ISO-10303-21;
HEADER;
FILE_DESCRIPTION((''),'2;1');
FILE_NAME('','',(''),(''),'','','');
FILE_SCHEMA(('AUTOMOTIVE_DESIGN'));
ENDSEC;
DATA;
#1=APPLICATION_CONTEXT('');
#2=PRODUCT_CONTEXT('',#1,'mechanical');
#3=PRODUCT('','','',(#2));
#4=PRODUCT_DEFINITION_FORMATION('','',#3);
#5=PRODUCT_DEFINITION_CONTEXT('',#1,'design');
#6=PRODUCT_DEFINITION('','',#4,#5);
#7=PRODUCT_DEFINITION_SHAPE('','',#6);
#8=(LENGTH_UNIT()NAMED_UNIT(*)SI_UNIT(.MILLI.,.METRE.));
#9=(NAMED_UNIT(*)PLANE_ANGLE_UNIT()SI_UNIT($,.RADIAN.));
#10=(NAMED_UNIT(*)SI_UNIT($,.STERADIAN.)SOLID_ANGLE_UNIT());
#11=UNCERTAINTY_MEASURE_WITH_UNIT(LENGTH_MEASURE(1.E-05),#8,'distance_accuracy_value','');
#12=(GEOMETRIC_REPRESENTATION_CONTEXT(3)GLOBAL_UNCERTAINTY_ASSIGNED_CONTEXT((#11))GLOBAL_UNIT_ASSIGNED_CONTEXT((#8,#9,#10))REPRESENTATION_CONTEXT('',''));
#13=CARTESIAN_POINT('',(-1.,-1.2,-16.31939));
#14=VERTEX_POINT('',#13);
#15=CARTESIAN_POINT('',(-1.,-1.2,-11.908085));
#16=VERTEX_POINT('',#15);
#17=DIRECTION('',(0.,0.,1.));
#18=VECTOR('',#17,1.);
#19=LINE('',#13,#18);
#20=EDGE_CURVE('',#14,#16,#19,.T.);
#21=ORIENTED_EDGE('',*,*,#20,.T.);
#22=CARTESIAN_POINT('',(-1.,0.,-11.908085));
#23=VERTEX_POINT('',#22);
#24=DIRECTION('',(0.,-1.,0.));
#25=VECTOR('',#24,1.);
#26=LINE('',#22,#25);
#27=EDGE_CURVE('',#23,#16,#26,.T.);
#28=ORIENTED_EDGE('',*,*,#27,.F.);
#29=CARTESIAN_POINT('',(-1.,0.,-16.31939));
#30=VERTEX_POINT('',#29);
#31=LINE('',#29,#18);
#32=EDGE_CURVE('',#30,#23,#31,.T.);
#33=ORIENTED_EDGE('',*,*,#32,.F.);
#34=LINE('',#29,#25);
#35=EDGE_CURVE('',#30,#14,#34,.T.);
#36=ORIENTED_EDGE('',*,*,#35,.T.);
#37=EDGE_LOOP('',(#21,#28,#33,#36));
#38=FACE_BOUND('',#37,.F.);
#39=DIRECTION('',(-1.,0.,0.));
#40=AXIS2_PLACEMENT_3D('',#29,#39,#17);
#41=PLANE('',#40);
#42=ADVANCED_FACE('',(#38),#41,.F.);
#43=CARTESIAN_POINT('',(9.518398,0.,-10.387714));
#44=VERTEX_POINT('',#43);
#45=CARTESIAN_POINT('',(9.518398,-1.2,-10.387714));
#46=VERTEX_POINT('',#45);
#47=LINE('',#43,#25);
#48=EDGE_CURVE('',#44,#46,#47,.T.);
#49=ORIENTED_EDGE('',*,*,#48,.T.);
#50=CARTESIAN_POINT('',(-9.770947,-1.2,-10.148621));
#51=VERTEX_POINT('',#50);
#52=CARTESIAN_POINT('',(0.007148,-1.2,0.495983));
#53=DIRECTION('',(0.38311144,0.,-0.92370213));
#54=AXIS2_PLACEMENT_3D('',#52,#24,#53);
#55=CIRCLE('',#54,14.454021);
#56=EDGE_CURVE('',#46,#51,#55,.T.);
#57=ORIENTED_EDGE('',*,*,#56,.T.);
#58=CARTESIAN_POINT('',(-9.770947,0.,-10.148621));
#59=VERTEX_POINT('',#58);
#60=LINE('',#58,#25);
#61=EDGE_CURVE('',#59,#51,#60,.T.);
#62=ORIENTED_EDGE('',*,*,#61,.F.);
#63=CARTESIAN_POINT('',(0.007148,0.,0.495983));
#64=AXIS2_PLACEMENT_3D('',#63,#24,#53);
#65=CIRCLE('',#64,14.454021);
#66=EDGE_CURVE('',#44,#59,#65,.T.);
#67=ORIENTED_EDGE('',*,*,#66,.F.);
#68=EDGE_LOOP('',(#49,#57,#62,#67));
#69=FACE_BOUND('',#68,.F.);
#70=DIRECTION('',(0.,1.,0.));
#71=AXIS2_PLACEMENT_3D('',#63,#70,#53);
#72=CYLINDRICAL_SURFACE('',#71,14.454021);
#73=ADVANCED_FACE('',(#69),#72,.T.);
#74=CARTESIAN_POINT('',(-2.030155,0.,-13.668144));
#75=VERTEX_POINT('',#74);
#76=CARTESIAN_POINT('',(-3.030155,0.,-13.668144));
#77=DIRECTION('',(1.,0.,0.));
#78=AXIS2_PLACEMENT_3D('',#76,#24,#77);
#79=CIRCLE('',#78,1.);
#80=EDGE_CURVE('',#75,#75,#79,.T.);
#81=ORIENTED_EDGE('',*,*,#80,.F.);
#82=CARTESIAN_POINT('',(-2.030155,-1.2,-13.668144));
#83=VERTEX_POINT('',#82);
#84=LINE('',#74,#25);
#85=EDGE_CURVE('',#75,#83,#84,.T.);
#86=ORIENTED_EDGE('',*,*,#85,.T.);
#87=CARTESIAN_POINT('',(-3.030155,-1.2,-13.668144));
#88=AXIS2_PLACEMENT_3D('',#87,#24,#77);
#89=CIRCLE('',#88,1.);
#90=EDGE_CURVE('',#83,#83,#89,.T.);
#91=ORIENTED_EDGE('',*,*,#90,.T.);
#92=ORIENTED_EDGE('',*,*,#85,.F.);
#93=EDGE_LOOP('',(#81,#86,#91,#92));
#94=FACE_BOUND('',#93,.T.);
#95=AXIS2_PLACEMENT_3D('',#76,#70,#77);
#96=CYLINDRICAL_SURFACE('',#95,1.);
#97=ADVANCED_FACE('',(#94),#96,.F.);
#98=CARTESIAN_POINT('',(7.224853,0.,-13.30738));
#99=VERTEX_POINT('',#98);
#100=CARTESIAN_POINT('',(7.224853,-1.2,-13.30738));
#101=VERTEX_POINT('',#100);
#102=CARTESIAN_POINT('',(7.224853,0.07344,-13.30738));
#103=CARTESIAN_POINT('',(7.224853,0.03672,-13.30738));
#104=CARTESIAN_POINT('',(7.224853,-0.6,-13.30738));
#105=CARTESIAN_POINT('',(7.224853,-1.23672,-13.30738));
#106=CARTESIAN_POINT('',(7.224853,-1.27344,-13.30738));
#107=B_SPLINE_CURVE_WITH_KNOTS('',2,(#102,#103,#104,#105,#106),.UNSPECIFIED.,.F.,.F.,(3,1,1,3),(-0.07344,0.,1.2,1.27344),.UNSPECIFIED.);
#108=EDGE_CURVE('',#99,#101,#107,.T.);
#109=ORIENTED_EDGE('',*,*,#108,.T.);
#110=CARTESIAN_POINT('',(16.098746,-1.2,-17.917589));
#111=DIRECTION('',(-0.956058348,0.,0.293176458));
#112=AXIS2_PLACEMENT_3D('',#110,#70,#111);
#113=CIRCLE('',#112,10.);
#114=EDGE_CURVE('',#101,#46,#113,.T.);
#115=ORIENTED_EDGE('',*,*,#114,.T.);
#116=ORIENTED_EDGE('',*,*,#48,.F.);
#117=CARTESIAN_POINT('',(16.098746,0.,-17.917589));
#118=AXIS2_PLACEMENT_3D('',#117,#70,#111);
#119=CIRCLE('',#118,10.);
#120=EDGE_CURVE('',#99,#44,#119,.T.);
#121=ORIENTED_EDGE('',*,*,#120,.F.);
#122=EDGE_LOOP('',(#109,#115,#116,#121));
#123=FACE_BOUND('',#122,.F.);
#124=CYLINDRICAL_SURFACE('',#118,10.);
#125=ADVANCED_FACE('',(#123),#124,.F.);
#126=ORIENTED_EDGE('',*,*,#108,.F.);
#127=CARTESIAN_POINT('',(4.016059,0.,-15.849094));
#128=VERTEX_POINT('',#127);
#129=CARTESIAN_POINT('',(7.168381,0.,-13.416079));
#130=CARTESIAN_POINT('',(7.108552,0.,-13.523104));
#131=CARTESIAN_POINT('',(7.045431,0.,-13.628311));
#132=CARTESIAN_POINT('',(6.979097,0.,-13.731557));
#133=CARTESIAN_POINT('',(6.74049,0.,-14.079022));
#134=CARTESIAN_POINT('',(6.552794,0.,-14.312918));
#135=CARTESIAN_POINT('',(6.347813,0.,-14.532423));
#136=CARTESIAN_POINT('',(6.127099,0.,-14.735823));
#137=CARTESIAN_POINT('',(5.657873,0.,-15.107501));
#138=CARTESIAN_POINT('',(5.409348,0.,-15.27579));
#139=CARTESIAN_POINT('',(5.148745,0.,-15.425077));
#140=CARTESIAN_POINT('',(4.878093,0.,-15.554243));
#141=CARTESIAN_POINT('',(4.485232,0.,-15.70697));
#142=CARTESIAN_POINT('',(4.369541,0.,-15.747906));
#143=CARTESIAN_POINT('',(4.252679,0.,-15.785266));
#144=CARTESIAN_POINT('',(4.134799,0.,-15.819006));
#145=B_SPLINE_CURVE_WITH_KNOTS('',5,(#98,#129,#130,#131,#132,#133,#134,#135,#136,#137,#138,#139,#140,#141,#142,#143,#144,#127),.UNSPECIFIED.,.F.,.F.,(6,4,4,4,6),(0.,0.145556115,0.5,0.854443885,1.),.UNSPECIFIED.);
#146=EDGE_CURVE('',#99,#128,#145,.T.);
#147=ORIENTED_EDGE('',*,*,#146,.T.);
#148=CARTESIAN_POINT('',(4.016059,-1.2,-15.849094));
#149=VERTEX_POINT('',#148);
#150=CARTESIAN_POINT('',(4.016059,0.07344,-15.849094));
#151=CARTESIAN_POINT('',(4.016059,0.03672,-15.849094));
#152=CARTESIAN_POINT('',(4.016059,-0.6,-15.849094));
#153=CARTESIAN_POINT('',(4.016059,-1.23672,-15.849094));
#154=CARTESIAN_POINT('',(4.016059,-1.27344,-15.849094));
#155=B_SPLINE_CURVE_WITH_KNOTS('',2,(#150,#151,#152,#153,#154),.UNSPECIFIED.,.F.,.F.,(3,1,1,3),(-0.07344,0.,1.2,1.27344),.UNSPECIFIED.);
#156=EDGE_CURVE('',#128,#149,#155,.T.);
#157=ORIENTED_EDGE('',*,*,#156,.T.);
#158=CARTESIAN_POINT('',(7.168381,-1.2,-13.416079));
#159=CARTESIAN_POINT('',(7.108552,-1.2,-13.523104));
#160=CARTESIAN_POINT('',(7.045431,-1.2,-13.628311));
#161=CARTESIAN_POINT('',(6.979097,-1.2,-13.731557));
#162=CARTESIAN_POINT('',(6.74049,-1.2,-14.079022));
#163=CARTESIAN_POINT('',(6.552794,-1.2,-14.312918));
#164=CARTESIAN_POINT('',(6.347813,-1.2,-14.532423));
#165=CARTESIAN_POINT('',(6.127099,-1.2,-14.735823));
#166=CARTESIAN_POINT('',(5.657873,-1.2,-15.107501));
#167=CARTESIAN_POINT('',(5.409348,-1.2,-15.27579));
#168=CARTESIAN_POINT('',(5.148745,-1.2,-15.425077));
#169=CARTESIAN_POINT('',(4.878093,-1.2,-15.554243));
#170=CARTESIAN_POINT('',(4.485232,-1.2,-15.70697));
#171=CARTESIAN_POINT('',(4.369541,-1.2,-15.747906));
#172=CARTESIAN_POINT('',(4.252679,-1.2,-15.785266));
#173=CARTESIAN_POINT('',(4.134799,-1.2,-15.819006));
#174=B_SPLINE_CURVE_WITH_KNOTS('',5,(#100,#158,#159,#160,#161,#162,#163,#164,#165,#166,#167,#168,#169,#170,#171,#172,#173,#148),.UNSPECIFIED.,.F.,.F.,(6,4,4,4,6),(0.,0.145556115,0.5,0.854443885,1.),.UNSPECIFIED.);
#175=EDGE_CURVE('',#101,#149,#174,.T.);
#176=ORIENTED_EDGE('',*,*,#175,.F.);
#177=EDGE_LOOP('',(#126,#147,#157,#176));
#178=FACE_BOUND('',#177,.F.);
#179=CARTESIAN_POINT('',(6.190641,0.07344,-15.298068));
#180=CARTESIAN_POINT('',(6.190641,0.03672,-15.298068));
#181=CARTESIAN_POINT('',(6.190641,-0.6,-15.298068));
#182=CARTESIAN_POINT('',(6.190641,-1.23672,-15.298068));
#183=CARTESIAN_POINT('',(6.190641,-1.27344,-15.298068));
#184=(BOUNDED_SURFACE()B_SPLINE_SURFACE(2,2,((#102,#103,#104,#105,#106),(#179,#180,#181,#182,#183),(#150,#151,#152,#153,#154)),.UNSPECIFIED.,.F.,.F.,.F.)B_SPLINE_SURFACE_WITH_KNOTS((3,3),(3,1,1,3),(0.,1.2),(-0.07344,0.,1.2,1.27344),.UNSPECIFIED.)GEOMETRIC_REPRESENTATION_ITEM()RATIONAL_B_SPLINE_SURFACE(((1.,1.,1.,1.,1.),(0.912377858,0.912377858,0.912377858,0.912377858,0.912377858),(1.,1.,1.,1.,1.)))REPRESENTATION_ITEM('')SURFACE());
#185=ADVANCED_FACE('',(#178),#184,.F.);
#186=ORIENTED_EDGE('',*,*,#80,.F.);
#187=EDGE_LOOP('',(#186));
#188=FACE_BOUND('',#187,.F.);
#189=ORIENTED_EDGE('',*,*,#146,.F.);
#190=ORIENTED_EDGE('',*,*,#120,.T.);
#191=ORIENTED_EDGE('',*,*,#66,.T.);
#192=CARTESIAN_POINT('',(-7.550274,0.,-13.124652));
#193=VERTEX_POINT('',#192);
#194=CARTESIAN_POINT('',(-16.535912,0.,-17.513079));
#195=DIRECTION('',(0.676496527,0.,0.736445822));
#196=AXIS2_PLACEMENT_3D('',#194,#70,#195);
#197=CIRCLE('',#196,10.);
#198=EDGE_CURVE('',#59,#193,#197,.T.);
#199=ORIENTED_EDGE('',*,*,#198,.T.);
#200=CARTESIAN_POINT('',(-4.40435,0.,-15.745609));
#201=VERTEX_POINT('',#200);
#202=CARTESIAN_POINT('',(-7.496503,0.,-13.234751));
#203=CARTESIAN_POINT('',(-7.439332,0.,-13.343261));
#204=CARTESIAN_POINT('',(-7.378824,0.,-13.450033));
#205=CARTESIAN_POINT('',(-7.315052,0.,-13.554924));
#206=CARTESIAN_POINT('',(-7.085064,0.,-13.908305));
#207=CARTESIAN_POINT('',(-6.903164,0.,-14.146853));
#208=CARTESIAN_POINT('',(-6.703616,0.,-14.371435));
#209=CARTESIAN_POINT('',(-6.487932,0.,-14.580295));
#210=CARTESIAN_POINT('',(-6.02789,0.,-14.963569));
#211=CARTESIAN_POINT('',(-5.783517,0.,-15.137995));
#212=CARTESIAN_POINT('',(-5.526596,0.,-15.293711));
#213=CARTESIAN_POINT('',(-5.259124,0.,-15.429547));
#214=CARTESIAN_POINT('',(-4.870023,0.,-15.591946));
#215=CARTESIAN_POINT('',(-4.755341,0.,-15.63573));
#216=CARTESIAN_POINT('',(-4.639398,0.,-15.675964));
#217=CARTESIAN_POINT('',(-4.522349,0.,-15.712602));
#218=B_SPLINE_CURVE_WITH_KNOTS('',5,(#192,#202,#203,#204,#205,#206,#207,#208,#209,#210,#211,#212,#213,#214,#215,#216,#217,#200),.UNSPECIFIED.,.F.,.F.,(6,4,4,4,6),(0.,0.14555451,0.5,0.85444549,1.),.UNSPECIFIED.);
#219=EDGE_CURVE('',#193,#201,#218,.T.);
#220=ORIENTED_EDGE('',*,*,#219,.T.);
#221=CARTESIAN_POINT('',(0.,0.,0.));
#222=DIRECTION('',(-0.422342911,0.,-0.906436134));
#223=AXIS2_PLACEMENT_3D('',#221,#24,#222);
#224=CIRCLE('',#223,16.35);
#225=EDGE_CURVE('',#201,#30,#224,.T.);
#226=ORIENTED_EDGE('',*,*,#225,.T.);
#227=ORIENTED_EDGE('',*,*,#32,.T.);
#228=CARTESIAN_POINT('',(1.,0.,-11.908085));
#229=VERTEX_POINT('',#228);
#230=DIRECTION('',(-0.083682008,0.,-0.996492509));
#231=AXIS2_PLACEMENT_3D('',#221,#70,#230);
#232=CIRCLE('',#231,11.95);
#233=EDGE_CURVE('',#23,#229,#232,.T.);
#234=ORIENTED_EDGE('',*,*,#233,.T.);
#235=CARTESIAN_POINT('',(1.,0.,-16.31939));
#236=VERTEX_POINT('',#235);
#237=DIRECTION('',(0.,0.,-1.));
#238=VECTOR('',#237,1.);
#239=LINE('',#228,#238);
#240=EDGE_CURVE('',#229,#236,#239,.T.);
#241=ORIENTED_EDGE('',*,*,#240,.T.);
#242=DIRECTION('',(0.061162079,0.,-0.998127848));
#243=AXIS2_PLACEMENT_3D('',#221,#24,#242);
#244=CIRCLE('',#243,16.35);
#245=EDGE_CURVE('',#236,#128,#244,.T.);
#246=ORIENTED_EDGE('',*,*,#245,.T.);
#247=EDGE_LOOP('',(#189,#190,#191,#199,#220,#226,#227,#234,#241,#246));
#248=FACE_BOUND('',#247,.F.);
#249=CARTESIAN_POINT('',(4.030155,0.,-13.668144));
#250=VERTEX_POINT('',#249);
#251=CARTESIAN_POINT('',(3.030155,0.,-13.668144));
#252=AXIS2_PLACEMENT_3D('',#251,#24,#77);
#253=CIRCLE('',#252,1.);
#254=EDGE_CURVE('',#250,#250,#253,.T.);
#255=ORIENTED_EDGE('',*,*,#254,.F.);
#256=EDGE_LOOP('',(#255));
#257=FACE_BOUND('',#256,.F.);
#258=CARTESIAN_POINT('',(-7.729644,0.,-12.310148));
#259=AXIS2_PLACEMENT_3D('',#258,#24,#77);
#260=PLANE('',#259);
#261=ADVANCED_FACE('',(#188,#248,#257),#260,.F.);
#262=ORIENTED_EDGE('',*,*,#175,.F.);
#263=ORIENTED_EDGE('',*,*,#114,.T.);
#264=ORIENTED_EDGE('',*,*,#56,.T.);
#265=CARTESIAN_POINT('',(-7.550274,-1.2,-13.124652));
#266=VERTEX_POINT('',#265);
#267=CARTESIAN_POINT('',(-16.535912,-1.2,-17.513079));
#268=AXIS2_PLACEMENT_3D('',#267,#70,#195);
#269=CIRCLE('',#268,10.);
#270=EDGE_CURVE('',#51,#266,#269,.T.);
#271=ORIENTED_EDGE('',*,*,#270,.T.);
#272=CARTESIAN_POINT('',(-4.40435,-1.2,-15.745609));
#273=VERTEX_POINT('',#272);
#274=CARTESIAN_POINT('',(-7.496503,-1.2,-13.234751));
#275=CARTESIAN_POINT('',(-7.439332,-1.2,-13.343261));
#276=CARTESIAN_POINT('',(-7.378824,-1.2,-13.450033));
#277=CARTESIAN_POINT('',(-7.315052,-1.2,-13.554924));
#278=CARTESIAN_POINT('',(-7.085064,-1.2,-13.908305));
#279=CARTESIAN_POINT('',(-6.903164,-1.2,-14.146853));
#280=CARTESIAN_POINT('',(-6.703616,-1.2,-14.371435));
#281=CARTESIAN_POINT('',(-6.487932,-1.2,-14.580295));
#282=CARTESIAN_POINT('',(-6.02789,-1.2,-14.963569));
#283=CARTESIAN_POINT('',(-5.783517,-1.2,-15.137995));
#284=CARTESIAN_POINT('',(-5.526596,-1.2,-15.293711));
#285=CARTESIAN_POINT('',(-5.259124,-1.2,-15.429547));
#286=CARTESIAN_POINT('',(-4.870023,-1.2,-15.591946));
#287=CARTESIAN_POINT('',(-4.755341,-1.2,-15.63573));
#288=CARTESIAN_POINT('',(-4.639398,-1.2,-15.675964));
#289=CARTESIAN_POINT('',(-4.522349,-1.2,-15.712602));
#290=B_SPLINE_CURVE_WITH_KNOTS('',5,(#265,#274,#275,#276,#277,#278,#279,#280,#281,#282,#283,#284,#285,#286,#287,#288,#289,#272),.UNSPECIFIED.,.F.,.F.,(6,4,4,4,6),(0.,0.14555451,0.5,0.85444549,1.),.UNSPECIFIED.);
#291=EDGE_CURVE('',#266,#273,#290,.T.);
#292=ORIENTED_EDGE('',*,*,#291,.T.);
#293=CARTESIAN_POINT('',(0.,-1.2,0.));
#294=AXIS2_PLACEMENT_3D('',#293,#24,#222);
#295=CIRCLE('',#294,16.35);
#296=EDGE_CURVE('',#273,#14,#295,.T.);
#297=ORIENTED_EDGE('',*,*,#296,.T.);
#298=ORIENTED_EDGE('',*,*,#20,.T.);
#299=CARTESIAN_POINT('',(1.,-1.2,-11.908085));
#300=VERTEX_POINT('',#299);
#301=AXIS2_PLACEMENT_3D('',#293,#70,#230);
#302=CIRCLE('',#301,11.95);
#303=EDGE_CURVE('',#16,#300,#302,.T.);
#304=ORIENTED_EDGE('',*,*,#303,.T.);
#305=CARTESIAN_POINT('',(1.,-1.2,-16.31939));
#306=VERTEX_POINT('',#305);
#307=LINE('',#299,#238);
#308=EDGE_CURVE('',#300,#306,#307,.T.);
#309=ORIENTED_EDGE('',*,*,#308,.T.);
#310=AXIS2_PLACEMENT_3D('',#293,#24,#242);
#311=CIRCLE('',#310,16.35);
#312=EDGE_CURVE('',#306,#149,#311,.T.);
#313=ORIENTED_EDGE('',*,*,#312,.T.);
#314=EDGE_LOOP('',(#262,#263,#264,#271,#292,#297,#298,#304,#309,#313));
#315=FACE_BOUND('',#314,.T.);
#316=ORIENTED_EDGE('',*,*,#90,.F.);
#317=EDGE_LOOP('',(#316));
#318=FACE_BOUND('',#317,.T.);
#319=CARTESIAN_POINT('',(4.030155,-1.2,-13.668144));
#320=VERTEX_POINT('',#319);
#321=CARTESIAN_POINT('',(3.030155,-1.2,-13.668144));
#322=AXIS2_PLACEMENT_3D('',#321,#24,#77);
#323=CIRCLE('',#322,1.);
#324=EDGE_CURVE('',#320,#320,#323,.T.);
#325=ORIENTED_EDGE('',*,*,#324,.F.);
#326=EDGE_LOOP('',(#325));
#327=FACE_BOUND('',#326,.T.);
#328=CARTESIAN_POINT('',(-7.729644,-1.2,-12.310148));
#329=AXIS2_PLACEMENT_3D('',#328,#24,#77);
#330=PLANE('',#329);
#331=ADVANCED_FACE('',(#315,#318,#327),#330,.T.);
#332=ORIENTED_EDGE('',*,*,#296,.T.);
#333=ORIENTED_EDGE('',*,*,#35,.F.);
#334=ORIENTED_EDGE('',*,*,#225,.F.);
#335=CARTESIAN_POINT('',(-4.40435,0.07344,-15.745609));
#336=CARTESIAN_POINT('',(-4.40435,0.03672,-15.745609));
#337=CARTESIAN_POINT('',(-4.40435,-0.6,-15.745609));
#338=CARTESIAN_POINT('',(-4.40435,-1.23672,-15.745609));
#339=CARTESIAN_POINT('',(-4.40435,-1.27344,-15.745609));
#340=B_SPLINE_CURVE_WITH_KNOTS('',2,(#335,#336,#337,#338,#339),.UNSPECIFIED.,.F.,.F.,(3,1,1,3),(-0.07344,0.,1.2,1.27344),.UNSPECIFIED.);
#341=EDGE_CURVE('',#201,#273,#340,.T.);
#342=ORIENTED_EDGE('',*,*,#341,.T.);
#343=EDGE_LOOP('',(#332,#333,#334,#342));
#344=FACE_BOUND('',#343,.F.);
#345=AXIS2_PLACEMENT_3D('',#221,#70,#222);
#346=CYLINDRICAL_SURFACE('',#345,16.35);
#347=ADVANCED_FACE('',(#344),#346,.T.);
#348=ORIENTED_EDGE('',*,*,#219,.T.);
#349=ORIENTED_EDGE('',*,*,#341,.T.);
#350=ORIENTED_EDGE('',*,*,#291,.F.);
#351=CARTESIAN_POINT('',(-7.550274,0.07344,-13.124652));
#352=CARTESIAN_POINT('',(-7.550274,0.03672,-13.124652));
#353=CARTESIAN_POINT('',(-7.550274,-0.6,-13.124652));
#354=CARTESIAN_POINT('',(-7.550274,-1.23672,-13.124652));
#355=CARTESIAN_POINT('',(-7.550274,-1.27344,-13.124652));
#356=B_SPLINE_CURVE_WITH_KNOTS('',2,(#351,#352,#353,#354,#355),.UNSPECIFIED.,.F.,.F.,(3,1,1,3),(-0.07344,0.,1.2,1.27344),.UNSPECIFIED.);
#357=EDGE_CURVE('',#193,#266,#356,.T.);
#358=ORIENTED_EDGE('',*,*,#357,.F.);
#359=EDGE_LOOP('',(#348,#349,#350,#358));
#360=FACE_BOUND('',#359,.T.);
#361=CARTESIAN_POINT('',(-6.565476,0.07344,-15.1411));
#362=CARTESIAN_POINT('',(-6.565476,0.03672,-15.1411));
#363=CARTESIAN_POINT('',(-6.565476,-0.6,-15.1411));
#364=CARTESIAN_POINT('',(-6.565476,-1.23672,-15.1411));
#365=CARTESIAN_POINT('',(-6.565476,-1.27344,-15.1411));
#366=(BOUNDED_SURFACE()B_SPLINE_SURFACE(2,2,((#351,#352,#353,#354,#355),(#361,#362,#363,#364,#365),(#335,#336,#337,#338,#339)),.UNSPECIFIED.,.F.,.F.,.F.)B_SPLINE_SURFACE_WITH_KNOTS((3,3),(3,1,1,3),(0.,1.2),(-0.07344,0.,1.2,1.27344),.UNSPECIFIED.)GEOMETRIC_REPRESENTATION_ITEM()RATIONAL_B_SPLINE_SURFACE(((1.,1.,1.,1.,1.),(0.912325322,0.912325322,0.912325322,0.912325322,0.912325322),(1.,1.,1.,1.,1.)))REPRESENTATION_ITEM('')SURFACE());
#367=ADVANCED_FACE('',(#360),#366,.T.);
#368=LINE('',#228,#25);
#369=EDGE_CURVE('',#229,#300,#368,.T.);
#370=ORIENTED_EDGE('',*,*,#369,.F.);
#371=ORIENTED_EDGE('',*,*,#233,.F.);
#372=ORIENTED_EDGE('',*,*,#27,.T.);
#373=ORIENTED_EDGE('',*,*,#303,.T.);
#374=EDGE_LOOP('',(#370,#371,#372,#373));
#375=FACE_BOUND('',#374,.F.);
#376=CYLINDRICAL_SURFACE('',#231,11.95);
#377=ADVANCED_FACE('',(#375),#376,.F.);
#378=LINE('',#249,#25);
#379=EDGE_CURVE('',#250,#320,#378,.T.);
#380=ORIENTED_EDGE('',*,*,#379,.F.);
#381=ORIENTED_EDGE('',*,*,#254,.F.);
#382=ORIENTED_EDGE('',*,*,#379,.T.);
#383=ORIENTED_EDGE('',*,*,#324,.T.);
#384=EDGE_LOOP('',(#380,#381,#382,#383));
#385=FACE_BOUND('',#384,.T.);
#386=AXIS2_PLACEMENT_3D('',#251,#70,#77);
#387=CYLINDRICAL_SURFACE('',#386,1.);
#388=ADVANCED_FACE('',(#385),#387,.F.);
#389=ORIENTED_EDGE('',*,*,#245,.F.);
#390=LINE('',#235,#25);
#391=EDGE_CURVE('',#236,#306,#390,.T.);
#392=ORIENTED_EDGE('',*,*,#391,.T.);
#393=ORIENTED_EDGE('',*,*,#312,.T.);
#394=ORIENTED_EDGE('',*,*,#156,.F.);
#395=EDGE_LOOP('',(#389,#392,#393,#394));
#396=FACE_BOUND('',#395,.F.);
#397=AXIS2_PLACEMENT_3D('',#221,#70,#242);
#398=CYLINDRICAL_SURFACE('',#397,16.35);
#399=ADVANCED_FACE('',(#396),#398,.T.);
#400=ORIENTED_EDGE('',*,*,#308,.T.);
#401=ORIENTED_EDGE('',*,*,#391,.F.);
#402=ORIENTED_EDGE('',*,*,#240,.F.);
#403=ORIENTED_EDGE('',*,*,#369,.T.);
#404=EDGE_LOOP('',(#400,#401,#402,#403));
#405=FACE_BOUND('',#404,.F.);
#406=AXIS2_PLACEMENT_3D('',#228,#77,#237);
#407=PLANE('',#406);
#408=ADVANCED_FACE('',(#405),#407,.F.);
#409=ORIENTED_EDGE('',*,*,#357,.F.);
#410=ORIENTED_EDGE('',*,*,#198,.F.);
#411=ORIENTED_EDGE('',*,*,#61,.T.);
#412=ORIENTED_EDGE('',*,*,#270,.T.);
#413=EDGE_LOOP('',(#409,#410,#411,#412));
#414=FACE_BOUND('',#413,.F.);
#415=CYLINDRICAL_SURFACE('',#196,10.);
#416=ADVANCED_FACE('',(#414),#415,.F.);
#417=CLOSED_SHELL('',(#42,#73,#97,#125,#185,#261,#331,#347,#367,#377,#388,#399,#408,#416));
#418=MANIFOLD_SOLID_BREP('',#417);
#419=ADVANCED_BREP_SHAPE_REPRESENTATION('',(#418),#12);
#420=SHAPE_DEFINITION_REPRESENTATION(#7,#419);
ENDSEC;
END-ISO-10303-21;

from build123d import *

# Parameters (mm, degrees)
F0_R        = 1
F1_DEPTH    = 1.2
F2_T1_DEPTH = 1.2
F3_R        = 5


# Not quite as in the source:
# - a fillet or chamfer that OpenCascade refuses, or shapes differently, is made with other operations: its cross-section is extruded or revolved along the edge and cut away or added


with BuildPart() as f1:
    # F0 (on Front) → F1 (new body)
    with BuildSketch(Plane.XZ):
        with BuildLine():
            ThreePointArc((-1, -11.9080854884), (0, 11.95), (1, -11.9080854884))
            Line((1, -11.9080854884), (1, -16.3193903072))
            ThreePointArc((1, -16.3193903072), (3.8276067146, -15.8956574837), (6.5381625357, -14.9858243236))
            Line((6.5381625357, -14.9858243236), (5.5446488339, -12.8552273145))
            ThreePointArc((5.5446488339, -12.8552273145), (0.2154334831, 14.9485032399), (-5.9128007498, -12.6901058819))
            Line((-5.9128007498, -12.6901058819), (-6.90530659, -14.8202307977))
            ThreePointArc((-6.90530659, -14.8202307977), (-4.0231005306, -15.8473077247), (-1, -16.3193903072))
            Line((-1, -16.3193903072), (-1, -11.9080854884))
        make_face()
        with Locations((-3.0301545951, -13.6681440997)):
            Circle(F0_R, mode=Mode.SUBTRACT)
        with Locations((3.0301545951, -13.6681440997)):
            Circle(F0_R, mode=Mode.SUBTRACT)
    extrude(amount=F1_DEPTH)

    # F2: fillet of radius 10 on 2 edges, made by hand

    # F2_s2 → F2_t1 (join)
    with BuildSketch(Plane.XZ):
        with BuildLine():
            ThreePointArc((-9.7709471746, -10.1486206785), (-8.0118480734, -12.2842810829), (-6.90530659, -14.8202307977))
            Line((-6.90530659, -14.8202307977), (-5.9128007498, -12.6901058819))
            ThreePointArc((-5.9128007498, -12.6901058819), (-7.9440740778, -11.5745099677), (-9.7709471746, -10.1486206785))
        make_face()
        with BuildLine():
            ThreePointArc((6.5381625357, -14.9858243236), (7.7071981674, -12.4786621044), (9.5183975603, -10.3877141232))
            ThreePointArc((9.5183975603, -10.3877141232), (7.6320006174, -11.7832822229), (5.5446488339, -12.8552273145))
            Line((5.5446488339, -12.8552273145), (6.5381625357, -14.9858243236))
        make_face()
    extrude(amount=F2_T1_DEPTH)

    # F3
    f3_edges = [f1.edges().sort_by_distance(p)[0] for p in [
        (-6.905307, -0.6, -14.820231),
        (6.538163, -0.6, -14.985824),
    ]]
    fillet(f3_edges, radius=F3_R)


solid = f1.part
